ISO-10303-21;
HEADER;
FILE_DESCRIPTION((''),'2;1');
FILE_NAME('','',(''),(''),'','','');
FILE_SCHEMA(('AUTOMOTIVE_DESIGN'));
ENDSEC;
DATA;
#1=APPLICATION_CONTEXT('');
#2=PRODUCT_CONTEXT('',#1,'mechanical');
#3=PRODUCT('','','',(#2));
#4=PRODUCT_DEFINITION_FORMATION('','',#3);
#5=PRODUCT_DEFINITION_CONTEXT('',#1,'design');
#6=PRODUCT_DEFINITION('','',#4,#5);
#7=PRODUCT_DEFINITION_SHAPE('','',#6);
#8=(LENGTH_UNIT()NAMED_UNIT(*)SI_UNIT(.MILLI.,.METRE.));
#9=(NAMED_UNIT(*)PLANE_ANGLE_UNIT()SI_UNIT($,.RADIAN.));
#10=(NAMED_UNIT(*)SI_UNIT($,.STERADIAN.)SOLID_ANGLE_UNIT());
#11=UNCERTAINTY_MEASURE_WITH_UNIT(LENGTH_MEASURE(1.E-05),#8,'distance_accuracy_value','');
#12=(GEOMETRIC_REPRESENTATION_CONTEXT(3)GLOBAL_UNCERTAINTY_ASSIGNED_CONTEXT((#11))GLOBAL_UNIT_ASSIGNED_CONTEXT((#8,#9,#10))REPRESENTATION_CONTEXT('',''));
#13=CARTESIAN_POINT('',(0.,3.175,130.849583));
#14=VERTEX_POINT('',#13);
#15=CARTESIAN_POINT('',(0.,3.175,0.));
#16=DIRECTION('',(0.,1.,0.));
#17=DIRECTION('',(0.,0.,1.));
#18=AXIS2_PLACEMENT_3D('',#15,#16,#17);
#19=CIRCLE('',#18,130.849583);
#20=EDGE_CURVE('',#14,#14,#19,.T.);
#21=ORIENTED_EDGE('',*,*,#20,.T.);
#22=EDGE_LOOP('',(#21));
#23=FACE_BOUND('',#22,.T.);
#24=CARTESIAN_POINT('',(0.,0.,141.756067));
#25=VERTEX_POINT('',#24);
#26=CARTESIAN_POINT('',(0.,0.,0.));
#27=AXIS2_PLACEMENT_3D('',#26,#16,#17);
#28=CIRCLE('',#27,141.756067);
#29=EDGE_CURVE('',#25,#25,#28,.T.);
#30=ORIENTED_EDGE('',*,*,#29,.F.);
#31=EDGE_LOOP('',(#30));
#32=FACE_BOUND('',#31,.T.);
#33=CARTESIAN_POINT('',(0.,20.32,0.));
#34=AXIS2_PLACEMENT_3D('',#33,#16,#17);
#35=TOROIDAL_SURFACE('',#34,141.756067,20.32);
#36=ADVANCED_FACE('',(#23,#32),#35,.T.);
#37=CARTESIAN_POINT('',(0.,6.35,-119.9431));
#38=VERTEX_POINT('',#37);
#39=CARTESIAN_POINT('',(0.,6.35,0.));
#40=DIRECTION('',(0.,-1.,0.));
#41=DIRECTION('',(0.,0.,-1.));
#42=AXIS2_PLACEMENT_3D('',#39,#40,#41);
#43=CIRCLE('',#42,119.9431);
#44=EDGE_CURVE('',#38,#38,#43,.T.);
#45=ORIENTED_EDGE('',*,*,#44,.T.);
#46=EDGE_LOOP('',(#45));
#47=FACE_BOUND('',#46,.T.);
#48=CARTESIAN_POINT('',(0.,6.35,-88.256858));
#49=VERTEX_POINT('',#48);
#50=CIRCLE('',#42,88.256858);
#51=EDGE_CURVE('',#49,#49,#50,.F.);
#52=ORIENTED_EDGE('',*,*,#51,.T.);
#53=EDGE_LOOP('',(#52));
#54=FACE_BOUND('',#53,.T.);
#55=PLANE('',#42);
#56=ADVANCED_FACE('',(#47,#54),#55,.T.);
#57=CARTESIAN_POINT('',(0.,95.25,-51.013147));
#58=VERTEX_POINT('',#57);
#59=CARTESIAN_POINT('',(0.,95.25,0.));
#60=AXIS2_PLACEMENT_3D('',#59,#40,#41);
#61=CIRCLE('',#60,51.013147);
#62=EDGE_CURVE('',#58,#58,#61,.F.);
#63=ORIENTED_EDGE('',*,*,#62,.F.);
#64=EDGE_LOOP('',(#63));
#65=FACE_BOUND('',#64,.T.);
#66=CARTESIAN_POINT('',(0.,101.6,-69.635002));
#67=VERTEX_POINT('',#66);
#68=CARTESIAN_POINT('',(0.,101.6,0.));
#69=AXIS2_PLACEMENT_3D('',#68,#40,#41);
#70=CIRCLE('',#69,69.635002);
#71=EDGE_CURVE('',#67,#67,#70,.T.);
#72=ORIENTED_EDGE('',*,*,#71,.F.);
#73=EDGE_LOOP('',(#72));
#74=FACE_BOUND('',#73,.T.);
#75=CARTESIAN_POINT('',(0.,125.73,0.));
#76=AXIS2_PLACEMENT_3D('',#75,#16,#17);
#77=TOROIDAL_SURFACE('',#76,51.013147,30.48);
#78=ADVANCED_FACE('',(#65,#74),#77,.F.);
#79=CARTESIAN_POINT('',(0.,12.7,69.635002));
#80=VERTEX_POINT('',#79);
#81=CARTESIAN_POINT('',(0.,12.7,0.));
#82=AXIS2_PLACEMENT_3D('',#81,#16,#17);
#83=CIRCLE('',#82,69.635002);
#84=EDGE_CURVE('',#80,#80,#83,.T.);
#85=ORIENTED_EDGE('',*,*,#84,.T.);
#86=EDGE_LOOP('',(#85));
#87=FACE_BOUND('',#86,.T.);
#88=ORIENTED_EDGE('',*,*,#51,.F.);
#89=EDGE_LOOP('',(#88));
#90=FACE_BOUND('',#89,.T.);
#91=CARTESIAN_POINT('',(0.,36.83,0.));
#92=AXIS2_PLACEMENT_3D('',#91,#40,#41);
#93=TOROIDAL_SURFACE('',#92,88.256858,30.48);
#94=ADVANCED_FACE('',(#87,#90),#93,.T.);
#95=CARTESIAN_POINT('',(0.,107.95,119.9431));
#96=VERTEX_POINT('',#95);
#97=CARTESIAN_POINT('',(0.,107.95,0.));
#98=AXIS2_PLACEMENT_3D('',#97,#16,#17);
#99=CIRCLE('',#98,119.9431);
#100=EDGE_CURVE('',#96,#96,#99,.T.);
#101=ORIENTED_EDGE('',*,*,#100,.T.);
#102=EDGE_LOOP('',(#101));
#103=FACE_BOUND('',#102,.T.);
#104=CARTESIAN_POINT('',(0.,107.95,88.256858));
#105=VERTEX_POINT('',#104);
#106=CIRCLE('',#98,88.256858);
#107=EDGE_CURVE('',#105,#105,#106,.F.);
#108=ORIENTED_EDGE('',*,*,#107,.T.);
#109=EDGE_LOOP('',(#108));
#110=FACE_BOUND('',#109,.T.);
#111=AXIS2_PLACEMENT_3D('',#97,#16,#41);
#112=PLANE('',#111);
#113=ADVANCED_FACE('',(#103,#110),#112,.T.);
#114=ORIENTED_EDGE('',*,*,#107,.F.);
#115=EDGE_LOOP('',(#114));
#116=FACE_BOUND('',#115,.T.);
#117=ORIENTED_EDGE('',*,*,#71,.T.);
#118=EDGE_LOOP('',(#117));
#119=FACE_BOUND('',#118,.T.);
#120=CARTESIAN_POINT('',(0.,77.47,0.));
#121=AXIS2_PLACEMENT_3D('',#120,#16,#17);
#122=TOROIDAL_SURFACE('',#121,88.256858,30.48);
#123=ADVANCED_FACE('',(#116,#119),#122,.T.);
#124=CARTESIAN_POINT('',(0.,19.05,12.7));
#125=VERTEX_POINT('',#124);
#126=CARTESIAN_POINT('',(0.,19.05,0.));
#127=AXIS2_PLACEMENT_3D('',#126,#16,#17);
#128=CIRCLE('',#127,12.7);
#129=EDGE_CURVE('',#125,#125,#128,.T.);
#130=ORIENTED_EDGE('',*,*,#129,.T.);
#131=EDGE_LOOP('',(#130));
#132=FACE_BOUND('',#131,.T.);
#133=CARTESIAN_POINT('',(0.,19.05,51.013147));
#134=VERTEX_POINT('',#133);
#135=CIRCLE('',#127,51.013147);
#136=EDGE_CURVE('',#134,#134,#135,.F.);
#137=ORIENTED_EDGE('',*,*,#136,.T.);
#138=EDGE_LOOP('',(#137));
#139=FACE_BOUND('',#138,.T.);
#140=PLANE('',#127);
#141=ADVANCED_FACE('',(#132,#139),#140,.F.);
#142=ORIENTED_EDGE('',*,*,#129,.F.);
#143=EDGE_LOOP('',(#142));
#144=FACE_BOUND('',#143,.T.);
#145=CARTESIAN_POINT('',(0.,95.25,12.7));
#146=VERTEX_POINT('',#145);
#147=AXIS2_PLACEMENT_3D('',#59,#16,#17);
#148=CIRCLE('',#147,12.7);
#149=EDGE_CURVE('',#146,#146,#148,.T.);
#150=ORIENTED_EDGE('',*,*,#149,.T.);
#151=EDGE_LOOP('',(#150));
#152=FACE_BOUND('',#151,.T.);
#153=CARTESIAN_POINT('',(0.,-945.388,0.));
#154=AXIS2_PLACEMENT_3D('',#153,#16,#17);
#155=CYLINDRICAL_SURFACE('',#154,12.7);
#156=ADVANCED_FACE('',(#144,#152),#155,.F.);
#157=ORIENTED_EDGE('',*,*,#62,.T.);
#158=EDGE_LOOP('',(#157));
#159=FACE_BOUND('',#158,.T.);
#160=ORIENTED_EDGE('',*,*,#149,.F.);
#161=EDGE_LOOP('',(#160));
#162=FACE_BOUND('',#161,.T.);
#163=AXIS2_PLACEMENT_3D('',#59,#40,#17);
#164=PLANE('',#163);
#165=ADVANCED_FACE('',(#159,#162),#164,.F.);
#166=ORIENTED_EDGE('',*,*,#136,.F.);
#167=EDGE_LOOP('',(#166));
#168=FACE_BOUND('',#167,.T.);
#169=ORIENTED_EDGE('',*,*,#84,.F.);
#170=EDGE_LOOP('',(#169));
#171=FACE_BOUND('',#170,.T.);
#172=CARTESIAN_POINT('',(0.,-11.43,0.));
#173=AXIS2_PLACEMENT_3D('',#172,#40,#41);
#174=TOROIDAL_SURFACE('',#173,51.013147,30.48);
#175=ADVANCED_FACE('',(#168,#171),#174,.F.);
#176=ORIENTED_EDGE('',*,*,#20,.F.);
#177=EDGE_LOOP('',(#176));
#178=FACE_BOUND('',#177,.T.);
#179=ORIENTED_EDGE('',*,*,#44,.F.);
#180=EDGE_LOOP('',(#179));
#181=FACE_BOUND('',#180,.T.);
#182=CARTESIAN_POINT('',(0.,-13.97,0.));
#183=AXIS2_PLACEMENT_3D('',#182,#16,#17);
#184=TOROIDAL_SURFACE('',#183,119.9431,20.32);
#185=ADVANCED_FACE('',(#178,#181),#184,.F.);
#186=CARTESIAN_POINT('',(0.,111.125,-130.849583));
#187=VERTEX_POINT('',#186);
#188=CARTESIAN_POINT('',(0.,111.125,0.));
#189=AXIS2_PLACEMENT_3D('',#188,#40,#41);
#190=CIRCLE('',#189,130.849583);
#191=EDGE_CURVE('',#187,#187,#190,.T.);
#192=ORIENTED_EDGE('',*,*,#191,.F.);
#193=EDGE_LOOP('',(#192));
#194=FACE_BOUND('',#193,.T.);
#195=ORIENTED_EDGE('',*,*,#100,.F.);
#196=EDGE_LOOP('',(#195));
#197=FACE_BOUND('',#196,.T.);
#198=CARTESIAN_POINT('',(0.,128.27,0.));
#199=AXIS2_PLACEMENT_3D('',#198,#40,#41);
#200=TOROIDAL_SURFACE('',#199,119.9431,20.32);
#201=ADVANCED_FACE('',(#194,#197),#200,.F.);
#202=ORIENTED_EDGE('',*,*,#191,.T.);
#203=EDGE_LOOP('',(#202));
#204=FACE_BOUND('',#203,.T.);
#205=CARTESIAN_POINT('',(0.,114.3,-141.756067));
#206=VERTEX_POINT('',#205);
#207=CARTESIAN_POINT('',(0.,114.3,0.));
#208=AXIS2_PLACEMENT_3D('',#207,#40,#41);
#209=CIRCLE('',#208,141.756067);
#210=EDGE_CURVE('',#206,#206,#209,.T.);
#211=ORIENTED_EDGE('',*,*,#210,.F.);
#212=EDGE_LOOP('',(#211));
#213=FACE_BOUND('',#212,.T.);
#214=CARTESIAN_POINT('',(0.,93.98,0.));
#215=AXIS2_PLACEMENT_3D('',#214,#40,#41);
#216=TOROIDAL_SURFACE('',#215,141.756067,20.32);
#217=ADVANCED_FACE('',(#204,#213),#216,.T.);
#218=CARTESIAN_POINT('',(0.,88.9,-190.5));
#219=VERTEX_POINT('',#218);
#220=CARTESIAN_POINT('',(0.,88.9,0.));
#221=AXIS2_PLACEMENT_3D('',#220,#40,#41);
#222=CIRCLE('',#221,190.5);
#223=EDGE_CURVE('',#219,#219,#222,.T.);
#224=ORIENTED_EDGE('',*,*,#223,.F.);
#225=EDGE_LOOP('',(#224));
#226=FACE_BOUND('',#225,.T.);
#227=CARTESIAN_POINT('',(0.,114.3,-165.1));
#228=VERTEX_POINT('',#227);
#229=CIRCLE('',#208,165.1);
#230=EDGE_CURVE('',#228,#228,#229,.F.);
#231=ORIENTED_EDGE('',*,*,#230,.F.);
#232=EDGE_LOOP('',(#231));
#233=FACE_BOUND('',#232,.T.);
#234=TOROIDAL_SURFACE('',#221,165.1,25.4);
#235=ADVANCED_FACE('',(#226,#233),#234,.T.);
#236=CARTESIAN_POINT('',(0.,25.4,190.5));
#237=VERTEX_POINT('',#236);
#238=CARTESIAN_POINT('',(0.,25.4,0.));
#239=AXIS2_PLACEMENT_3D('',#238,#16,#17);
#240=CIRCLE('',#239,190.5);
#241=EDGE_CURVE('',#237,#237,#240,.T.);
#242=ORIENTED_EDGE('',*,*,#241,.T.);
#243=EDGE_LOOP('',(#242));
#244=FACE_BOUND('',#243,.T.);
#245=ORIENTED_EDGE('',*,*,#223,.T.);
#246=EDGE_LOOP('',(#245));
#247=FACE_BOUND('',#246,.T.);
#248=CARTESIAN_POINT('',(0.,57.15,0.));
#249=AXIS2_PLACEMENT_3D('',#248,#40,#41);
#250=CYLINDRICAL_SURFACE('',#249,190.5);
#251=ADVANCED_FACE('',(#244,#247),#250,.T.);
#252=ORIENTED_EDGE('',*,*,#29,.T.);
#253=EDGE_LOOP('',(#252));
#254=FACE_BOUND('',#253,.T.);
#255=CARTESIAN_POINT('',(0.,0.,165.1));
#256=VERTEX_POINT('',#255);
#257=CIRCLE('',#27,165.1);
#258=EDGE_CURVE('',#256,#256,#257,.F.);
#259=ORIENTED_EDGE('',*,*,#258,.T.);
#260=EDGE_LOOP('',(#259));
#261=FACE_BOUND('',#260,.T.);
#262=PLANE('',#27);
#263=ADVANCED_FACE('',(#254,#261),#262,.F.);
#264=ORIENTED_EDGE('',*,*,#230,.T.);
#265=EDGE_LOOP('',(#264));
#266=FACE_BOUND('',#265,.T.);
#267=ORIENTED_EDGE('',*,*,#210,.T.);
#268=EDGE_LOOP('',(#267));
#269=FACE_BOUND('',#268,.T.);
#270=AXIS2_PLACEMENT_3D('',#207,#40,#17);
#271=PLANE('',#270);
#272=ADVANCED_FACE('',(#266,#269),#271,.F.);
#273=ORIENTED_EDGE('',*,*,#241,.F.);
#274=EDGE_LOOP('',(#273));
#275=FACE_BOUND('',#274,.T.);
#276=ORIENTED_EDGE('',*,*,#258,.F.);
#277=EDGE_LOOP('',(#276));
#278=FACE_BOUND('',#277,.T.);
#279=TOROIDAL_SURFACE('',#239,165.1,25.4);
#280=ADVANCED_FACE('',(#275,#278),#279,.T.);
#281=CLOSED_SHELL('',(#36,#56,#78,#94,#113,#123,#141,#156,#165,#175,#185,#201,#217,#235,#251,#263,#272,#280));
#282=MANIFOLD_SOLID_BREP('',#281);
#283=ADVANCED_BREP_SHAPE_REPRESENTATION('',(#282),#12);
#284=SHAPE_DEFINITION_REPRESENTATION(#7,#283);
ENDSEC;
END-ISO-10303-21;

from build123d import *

# Parameters (mm, degrees)
SKETCH1_R            = 190.5
BOSS_EXTRUDE1_DEPTH  = 57.15
SKETCH2_R            = 19.05
CUT_EXTRUDE1_DEPTH   = 484.378
SKETCH3_R            = 127
CUT_EXTRUDE2_DEPTH   = 6.35
SKETCH4_R            = 63.5
CUT_EXTRUDE3_DEPTH   = 19.05
FILLET1_R            = 20.32
FILLET2_R            = 20.32
FILLET3_R            = 30.48
FILLET4_R            = 30.48
FILLET1_OF_MIRROR2_R = 20.32
FILLET2_OF_MIRROR2_R = 20.32
FILLET3_OF_MIRROR2_R = 30.48
FILLET4_OF_MIRROR2_R = 30.48
FILLET7_R            = 25.4
FILLET8_R            = 25.4
SKETCH5_R            = 51.013146757
BOSS_EXTRUDE3_DEPTH  = 76.2
SKETCH6_R            = 12.7
CUT_EXTRUDE4_DEPTH   = 1040.638


with BuildPart() as part:
    # Sketch1 → Boss-Extrude1 (new body)
    with BuildSketch(Plane(origin=(0, 0, 0), x_dir=(1, 0, 0), z_dir=(0, 1, 0))):
        with Locations(Location((0, 0, 0), (0, 0, 270))):
            Circle(SKETCH1_R)
    boss_extrude1 = extrude(amount=BOSS_EXTRUDE1_DEPTH)

    # Sketch2 → Cut-Extrude1 (cut)
    with BuildSketch(Plane(origin=(0, 57.15, 0), x_dir=(1, 0, 0), z_dir=(0, 1, 0))):
        with Locations(Location((0, 0, 0), (0, 0, 270))):
            Circle(SKETCH2_R)
    cut_extrude1 = extrude(amount=-CUT_EXTRUDE1_DEPTH, mode=Mode.SUBTRACT)

    # Sketch3 → Cut-Extrude2 (cut)
    with BuildSketch(Plane(origin=(0, 0, 0), x_dir=(-1, 0, 0), z_dir=(0, -1, 0))):
        with Locations(Location((0, 0, 0), (0, 0, 90))):
            Circle(SKETCH3_R)
    cut_extrude2 = extrude(amount=-CUT_EXTRUDE2_DEPTH, mode=Mode.SUBTRACT)

    # Sketch4 → Cut-Extrude3 (cut)
    with BuildSketch(Plane(origin=(0, 0, 0), x_dir=(1, 0, 0), z_dir=(0, 1, 0))):
        with Locations(Location((0, 0, 0), (0, 0, 90))):
            Circle(SKETCH4_R)
    cut_extrude3 = extrude(amount=CUT_EXTRUDE3_DEPTH, mode=Mode.SUBTRACT)

    # Fillet1
    # the kernel refuses this fillet: 20.32 mm, written as the material it takes off along each edge
    with BuildSketch(Plane(origin=(0, 0, 0), x_dir=(0, 0, -1), z_dir=(-1, 0, 0))) as fillet1_piece_1:
        with BuildLine():
            CenterArc((141.756066549, -20.32), FILLET1_R, 90, 46.567463442)
            Line((127, -6.35), (126.704878669, -6.0706))
            ThreePointArc((126.704878669, -6.0706), (126.5936, -3.175), (126.5936, 0))
            Line((126.5936, 0), (127, 0.4064))
            Line((127, 0.4064), (141.756066549, 0.4064))
            Line((141.756066549, 0.4064), (141.756066549, 0))
        make_face()
    revolve(axis=Axis((0, 0, 0), (0, -1, 0)), mode=Mode.SUBTRACT)

    # Fillet2
    fillet2_edges = [part.edges().sort_by_distance(p)[0] for p in [
        (0, 6.35, 127),
    ]]
    fillet(fillet2_edges, radius=FILLET2_R)

    # Fillet3
    # the kernel refuses this fillet: 30.48 mm, written as the material it takes off along each edge
    with BuildSketch(Plane(origin=(0, 6.35, 0), x_dir=(0, 0, -1), z_dir=(-1, 0, 0))) as fillet3_piece_1:
        with BuildLine():
            CenterArc((88.256857636, -30.48), FILLET3_R, 90, 54.314665287)
            Line((63.5, -12.7), (63.004862847, -12.3444))
            ThreePointArc((63.004862847, -12.3444), (62.8904, -6.35), (62.8904, 0))
            Line((62.8904, 0), (63.5, 0.6096))
            Line((63.5, 0.6096), (88.256857636, 0.6096))
            Line((88.256857636, 0.6096), (88.256857636, 0))
        make_face()
    revolve(axis=Axis((0, 6.35, 0), (0, -1, 0)), mode=Mode.SUBTRACT)

    # Fillet4
    fillet4_edges = [part.edges().sort_by_distance(p)[0] for p in [
        (0, 19.05, 63.5),
    ]]
    fillet(fillet4_edges, radius=FILLET4_R)

    # Mirror2: Boss-Extrude1, Cut-Extrude1, Cut-Extrude2, Cut-Extrude3 across plane
    add(boss_extrude1.mirror(Plane.ZX.offset(57.15)))
    add(cut_extrude1.mirror(Plane.ZX.offset(57.15)), mode=Mode.SUBTRACT)
    add(cut_extrude2.mirror(Plane.ZX.offset(57.15)), mode=Mode.SUBTRACT)
    add(cut_extrude3.mirror(Plane.ZX.offset(57.15)), mode=Mode.SUBTRACT)

    # Fillet1 of Mirror2
    # the kernel refuses this fillet: 20.32 mm, written as the material it takes off along each edge
    with BuildSketch(Plane(origin=(0, 114.3, 0), x_dir=(0, 0, -1), z_dir=(-1, 0, 0))) as fillet1_of_mirror2_piece_1:
        with BuildLine():
            CenterArc((141.756066549, 20.32), FILLET1_OF_MIRROR2_R, 223.432536558, 46.567463442)
            Line((127, 6.35), (126.704878669, 6.0706))
            ThreePointArc((126.704878669, 6.0706), (126.5936, 3.175), (126.5936, 0))
            Line((126.5936, 0), (127, -0.4064))
            Line((127, -0.4064), (141.756066549, -0.4064))
            Line((141.756066549, -0.4064), (141.756066549, 0))
        make_face()
    revolve(axis=Axis((0, 114.3, 0), (0, -1, 0)), mode=Mode.SUBTRACT)

    # Fillet2 of Mirror2
    fillet2_of_mirror2_edges = [part.edges().sort_by_distance(p)[0] for p in [
        (0, 107.95, 127),
    ]]
    fillet(fillet2_of_mirror2_edges, radius=FILLET2_OF_MIRROR2_R)

    # Fillet3 of Mirror2
    # the kernel refuses this fillet: 30.48 mm, written as the material it takes off along each edge
    with BuildSketch(Plane(origin=(0, 107.95, 0), x_dir=(0, 0, -1), z_dir=(1, 0, 0))) as fillet3_of_mirror2_piece_1:
        with BuildLine():
            CenterArc((88.256857636, -30.48), FILLET3_OF_MIRROR2_R, 90, 54.314665287)
            Line((63.5, -12.7), (63.004862847, -12.3444))
            ThreePointArc((63.004862847, -12.3444), (62.8904, -6.35), (62.8904, 0))
            Line((62.8904, 0), (63.5, 0.6096))
            Line((63.5, 0.6096), (88.256857636, 0.6096))
            Line((88.256857636, 0.6096), (88.256857636, 0))
        make_face()
    revolve(axis=Axis((0, 107.95, 0), (0, 1, 0)), mode=Mode.SUBTRACT)

    # Fillet4 of Mirror2
    fillet4_of_mirror2_edges = [part.edges().sort_by_distance(p)[0] for p in [
        (0, 95.25, 63.5),
    ]]
    fillet(fillet4_of_mirror2_edges, radius=FILLET4_OF_MIRROR2_R)

    # Fillet7
    fillet7_edges = [part.edges().sort_by_distance(p)[0] for p in [
        (0, 114.3, -190.5),
    ]]
    fillet(fillet7_edges, radius=FILLET7_R)

    # Fillet8
    fillet8_edges = [part.edges().sort_by_distance(p)[0] for p in [
        (0, 0, -190.5),
    ]]
    fillet(fillet8_edges, radius=FILLET8_R)

    # Sketch5 → Boss-Extrude3 (add)
    with BuildSketch(Plane(origin=(0, 95.25, 0), x_dir=(1, 0, 0), z_dir=(0, 1, 0))):
        Circle(SKETCH5_R)
    extrude(amount=-BOSS_EXTRUDE3_DEPTH)

    # Sketch6 → Cut-Extrude4 (cut)
    with BuildSketch(Plane(origin=(0, 95.25, 0), x_dir=(1, 0, 0), z_dir=(0, 1, 0))):
        with Locations(Location((0, 0, 0), (0, 0, 270))):
            Circle(SKETCH6_R)
    extrude(amount=-CUT_EXTRUDE4_DEPTH, mode=Mode.SUBTRACT)


solid = part.part
